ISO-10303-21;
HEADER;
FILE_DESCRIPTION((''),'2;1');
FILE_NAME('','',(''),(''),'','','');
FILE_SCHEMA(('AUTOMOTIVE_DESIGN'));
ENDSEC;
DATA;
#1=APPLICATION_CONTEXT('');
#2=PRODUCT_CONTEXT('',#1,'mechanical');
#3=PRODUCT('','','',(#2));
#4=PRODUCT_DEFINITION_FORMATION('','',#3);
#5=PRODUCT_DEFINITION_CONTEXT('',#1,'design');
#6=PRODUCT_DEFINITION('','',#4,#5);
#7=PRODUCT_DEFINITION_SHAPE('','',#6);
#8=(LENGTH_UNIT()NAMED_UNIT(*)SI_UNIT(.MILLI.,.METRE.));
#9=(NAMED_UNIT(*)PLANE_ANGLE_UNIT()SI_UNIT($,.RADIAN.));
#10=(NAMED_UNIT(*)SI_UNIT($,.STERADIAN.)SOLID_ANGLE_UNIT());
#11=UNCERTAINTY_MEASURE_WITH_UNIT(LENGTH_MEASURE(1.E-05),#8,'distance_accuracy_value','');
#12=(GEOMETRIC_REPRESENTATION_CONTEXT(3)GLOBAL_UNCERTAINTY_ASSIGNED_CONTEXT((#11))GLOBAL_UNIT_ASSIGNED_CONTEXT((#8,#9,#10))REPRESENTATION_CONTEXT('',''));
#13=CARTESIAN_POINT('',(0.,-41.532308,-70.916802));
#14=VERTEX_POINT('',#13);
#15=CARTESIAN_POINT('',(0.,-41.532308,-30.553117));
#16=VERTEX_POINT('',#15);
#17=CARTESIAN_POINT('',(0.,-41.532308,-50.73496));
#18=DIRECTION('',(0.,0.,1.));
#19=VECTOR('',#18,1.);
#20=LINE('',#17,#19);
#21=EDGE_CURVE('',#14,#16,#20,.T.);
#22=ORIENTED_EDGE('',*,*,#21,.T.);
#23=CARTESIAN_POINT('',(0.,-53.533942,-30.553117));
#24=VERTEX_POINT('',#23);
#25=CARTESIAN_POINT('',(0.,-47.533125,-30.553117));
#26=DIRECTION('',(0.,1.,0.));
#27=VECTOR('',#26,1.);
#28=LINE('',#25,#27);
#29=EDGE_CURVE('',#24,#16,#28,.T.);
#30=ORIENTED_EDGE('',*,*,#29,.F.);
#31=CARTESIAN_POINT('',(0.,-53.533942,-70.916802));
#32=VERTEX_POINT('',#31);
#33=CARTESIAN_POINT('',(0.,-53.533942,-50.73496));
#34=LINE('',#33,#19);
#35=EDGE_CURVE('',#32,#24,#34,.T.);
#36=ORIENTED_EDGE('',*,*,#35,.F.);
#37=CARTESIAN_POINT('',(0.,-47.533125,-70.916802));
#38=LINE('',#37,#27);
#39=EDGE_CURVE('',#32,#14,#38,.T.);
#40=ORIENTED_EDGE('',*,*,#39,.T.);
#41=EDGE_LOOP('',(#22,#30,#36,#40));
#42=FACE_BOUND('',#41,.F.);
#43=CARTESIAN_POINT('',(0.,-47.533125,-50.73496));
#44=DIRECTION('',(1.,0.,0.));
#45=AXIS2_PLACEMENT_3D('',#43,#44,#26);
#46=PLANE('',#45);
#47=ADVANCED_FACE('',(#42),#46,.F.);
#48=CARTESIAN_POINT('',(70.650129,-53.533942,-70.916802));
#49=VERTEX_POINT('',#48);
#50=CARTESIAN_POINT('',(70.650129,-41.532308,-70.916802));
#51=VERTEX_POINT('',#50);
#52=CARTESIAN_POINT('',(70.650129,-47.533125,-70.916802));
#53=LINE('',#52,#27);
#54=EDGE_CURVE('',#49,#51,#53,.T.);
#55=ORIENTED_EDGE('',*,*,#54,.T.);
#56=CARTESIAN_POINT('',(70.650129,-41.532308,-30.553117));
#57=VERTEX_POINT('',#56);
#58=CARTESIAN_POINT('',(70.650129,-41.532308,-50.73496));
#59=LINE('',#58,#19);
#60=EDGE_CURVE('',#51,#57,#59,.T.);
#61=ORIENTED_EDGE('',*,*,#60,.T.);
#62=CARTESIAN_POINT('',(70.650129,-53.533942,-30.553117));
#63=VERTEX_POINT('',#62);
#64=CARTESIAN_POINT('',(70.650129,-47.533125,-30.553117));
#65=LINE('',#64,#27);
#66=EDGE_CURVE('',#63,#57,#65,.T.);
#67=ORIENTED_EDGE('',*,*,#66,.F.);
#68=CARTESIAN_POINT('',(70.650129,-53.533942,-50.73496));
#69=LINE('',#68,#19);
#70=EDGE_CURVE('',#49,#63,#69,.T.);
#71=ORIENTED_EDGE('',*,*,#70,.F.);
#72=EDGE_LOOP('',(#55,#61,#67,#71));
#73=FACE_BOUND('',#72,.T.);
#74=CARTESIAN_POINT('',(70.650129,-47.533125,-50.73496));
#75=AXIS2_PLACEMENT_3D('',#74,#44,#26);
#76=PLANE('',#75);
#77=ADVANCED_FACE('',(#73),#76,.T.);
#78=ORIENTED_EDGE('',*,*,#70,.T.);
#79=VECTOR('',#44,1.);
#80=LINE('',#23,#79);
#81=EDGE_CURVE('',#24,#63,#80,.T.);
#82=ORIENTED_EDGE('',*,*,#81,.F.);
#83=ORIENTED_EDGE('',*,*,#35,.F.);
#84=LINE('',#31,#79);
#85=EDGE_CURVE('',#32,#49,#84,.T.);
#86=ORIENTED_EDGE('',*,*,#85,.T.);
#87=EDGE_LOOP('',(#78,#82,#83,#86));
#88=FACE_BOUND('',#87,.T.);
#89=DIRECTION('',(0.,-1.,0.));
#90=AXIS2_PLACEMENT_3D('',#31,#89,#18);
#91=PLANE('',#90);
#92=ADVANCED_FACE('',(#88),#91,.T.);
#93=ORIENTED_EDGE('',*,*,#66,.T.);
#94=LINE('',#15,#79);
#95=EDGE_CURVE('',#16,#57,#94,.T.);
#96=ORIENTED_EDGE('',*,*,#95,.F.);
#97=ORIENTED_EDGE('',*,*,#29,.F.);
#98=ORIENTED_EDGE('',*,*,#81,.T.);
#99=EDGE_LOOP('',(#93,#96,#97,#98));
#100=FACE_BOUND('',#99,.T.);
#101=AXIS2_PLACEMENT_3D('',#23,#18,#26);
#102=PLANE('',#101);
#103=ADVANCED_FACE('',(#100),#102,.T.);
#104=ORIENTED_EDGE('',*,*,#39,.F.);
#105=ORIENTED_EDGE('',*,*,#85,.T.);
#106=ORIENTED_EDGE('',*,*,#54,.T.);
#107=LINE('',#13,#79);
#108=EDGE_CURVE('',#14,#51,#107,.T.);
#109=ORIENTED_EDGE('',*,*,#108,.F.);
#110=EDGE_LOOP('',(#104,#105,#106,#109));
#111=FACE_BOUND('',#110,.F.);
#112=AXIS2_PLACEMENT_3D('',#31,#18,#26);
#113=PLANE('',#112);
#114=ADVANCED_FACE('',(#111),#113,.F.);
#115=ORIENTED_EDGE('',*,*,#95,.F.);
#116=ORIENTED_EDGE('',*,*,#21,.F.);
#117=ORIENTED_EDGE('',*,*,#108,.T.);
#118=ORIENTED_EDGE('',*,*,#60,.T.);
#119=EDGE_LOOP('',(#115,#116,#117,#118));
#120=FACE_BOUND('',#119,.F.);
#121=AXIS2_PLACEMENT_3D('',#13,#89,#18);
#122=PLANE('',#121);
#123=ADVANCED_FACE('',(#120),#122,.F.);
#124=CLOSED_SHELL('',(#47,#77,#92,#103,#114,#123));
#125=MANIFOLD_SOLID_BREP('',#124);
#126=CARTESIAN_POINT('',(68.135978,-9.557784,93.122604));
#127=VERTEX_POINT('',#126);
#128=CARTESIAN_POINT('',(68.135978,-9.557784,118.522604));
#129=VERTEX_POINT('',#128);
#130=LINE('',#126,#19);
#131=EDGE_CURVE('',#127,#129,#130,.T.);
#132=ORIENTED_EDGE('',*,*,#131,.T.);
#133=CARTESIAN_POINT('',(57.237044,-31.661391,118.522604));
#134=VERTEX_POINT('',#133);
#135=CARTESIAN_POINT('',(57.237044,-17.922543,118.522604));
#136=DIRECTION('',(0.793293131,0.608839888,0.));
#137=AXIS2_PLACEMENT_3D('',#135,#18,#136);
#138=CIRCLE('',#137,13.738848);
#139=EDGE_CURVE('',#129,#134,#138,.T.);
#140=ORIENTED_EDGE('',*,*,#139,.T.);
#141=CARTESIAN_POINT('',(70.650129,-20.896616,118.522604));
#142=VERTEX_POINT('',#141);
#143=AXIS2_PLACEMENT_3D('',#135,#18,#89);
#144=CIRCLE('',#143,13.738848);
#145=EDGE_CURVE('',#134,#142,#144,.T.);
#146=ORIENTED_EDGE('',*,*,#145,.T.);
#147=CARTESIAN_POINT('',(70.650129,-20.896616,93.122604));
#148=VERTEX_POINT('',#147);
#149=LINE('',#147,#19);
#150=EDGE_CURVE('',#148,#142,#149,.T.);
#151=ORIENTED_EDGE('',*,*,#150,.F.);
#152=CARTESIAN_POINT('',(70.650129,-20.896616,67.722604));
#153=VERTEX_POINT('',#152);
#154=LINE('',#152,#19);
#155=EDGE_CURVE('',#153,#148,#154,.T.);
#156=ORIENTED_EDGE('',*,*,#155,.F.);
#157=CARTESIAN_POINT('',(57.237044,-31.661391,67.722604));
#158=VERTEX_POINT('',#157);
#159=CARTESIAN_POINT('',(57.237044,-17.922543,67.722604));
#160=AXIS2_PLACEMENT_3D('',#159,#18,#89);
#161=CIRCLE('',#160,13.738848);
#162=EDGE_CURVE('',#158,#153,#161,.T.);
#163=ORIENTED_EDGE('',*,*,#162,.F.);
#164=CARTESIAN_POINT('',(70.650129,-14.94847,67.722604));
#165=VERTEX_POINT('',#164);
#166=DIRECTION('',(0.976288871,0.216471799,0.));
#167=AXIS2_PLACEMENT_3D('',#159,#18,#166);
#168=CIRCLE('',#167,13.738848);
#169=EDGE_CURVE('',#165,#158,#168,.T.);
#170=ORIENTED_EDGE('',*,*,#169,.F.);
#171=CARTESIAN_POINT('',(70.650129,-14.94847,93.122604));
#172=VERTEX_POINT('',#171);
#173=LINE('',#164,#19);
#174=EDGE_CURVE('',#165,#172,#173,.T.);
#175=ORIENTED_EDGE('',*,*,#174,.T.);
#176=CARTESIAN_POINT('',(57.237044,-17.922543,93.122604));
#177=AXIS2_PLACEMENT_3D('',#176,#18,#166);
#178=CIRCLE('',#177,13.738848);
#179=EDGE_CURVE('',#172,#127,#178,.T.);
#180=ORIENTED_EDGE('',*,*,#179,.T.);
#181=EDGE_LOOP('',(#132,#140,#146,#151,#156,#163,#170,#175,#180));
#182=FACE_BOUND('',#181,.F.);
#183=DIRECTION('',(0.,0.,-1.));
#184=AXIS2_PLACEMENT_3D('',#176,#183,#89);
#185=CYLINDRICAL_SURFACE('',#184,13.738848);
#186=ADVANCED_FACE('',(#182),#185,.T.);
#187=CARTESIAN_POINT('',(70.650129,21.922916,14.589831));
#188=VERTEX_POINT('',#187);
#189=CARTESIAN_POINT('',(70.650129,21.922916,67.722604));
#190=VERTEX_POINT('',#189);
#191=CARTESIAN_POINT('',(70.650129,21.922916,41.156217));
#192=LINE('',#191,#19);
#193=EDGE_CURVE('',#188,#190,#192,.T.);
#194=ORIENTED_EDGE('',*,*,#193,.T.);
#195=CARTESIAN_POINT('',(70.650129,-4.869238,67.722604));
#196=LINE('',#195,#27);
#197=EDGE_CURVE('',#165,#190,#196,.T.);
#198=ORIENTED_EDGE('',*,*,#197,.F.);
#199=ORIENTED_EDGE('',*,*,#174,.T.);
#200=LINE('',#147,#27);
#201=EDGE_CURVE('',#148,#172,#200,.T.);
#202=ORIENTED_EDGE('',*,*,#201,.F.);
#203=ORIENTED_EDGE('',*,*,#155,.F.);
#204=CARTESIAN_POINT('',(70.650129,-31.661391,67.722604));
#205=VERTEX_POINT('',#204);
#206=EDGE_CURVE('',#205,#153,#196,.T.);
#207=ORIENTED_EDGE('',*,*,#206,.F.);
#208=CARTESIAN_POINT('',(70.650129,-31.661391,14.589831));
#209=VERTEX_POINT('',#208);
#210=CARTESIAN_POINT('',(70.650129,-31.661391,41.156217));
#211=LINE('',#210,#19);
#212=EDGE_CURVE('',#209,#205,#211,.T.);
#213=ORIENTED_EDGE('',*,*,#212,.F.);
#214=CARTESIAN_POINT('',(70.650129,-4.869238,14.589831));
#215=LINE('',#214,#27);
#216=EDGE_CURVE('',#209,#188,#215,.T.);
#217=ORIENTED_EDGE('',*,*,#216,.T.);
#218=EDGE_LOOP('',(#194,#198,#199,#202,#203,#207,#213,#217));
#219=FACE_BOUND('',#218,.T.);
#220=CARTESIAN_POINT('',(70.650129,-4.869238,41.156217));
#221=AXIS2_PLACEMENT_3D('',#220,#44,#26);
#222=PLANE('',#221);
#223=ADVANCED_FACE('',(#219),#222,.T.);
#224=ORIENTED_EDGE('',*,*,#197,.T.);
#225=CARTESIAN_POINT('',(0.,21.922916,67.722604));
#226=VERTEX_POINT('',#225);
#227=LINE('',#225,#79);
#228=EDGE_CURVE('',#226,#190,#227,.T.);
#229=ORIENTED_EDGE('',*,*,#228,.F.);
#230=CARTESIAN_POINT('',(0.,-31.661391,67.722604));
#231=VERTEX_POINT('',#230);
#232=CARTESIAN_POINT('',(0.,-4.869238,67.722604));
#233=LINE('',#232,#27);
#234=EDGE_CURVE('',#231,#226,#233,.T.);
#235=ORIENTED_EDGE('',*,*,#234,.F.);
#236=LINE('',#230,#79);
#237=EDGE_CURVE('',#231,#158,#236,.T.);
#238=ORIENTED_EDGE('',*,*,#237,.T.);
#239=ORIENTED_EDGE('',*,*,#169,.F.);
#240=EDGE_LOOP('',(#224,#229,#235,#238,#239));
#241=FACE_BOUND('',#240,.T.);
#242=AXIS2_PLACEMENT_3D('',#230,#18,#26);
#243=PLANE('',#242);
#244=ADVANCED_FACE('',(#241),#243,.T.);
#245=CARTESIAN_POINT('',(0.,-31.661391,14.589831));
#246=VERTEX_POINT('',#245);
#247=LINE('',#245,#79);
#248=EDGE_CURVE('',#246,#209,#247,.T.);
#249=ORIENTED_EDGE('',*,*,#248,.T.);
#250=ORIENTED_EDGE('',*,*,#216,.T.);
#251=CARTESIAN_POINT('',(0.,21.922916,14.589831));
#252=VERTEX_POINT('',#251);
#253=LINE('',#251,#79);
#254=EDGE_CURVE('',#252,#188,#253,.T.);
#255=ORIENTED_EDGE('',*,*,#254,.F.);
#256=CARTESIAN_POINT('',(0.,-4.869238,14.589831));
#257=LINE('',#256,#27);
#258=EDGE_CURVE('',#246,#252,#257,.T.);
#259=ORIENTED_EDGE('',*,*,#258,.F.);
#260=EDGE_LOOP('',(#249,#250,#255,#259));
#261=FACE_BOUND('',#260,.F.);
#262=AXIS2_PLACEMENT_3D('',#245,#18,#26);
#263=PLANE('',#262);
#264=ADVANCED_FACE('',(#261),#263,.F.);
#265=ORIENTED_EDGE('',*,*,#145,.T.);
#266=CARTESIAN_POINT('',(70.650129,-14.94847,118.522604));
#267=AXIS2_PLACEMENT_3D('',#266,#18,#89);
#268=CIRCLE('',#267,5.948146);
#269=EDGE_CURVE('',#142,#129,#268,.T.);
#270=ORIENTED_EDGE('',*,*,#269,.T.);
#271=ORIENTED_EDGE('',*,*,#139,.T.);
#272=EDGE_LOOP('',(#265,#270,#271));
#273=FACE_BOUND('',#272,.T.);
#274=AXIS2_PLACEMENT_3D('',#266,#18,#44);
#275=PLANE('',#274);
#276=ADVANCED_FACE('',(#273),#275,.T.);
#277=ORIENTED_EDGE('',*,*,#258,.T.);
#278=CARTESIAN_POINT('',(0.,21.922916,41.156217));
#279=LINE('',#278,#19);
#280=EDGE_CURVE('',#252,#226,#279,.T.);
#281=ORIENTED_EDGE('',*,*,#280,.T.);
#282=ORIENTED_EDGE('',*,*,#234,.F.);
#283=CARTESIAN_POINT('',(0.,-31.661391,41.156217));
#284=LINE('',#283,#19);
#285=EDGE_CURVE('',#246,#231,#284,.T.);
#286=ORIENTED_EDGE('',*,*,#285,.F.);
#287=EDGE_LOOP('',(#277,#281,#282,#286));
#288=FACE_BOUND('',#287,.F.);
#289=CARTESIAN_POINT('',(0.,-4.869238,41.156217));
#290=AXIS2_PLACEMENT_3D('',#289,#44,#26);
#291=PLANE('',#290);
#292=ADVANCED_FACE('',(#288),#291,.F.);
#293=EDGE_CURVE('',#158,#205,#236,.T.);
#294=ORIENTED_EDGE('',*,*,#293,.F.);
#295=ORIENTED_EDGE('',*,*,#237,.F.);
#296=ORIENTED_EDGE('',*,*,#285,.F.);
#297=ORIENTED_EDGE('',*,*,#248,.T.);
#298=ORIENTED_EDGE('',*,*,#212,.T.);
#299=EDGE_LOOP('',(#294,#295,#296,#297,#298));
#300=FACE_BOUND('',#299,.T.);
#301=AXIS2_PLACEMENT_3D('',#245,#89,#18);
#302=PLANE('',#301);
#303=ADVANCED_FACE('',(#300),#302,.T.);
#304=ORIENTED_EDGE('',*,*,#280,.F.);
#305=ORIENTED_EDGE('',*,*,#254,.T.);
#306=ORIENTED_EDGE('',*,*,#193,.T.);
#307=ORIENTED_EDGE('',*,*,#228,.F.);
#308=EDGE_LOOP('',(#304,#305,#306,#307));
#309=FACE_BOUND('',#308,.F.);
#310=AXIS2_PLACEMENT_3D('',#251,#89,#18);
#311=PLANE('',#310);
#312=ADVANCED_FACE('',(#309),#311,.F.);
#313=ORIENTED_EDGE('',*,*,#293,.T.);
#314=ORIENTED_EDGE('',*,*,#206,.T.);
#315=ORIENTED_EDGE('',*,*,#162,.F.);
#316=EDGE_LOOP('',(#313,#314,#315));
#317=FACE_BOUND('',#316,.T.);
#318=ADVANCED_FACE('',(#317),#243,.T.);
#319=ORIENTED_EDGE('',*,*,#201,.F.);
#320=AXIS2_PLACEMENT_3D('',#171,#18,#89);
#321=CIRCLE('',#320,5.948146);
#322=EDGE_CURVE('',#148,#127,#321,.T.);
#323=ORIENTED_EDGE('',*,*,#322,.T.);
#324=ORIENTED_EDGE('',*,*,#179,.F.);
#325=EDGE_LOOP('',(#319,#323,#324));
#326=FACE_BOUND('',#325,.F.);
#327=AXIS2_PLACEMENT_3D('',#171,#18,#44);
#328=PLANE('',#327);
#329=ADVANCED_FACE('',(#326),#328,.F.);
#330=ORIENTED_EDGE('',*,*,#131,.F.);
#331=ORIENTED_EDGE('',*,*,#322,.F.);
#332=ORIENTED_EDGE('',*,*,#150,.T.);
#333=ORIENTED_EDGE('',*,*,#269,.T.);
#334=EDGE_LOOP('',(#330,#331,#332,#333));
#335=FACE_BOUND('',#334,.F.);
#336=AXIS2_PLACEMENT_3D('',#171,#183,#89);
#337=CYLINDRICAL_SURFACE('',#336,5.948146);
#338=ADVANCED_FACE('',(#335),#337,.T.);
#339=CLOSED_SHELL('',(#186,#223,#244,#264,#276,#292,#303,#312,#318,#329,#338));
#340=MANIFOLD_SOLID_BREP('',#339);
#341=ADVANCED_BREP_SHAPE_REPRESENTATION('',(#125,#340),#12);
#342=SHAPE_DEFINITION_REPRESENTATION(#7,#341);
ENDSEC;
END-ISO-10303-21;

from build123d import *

# Parameters (mm, degrees)
F3_W     = 12.0016336441
F3_H     = 40.3636842966
F0_DEPTH = 70.6501286477
F3_W_2   = 53.5843074322
F3_H_2   = 53.1327724457
F4_DEPTH = 25.4
F2_R     = 5.9481463901
F5_DEPTH = 25.4


with BuildPart() as f0:
    # F3 (on Right) → F0 (new body)
    with BuildSketch(Plane.YZ):
        with Locations((-47.5331246853, -50.7349595428)):
            Rectangle(F3_W, F3_H)
    extrude(amount=F0_DEPTH)


with BuildPart() as f0b:
    # F3 (on Right) → F0, piece 2 (new body)
    with BuildSketch(Plane.YZ):
        with Locations((-4.8692375422, 41.1562174559)):
            Rectangle(F3_W_2, F3_H_2)
    extrude(amount=F0_DEPTH)

    # F1 (on face) → F4 (join)
    with BuildSketch(Plane.XY.offset(67.7226036787)):
        with BuildLine():
            Line((70.6501286477, -20.8966161843), (70.6501286477, -14.9484697942))
            ThreePointArc((70.6501286477, -14.9484697942), (46.5221876519, -9.3232519897), (57.2370439768, -31.6613912582))
            ThreePointArc((57.2370439768, -31.6613912582), (65.8363349764, -28.6373993141), (70.6501286477, -20.8966161843))
        make_face()
    extrude(amount=F4_DEPTH)

    # F2 (on face) → F5 (join)
    with BuildSketch(Plane.XY.offset(93.1226036787)):
        with Locations((70.6501286477, -14.9484697942)):
            Circle(F2_R)
        with BuildLine():
            ThreePointArc((57.2370439768, -31.6613912582), (65.8363349764, -28.6373993141), (70.6501286477, -20.8966161843))
            ThreePointArc((70.6501286477, -20.8966161843), (64.8430195216, -16.2360757414), (68.1359779337, -9.5577841546))
            ThreePointArc((68.1359779337, -9.5577841546), (44.914744999, -11.8466151045), (57.2370439768, -31.6613912582))
        make_face()
    extrude(amount=F5_DEPTH)


solid = Compound([f0.part, f0b.part])
